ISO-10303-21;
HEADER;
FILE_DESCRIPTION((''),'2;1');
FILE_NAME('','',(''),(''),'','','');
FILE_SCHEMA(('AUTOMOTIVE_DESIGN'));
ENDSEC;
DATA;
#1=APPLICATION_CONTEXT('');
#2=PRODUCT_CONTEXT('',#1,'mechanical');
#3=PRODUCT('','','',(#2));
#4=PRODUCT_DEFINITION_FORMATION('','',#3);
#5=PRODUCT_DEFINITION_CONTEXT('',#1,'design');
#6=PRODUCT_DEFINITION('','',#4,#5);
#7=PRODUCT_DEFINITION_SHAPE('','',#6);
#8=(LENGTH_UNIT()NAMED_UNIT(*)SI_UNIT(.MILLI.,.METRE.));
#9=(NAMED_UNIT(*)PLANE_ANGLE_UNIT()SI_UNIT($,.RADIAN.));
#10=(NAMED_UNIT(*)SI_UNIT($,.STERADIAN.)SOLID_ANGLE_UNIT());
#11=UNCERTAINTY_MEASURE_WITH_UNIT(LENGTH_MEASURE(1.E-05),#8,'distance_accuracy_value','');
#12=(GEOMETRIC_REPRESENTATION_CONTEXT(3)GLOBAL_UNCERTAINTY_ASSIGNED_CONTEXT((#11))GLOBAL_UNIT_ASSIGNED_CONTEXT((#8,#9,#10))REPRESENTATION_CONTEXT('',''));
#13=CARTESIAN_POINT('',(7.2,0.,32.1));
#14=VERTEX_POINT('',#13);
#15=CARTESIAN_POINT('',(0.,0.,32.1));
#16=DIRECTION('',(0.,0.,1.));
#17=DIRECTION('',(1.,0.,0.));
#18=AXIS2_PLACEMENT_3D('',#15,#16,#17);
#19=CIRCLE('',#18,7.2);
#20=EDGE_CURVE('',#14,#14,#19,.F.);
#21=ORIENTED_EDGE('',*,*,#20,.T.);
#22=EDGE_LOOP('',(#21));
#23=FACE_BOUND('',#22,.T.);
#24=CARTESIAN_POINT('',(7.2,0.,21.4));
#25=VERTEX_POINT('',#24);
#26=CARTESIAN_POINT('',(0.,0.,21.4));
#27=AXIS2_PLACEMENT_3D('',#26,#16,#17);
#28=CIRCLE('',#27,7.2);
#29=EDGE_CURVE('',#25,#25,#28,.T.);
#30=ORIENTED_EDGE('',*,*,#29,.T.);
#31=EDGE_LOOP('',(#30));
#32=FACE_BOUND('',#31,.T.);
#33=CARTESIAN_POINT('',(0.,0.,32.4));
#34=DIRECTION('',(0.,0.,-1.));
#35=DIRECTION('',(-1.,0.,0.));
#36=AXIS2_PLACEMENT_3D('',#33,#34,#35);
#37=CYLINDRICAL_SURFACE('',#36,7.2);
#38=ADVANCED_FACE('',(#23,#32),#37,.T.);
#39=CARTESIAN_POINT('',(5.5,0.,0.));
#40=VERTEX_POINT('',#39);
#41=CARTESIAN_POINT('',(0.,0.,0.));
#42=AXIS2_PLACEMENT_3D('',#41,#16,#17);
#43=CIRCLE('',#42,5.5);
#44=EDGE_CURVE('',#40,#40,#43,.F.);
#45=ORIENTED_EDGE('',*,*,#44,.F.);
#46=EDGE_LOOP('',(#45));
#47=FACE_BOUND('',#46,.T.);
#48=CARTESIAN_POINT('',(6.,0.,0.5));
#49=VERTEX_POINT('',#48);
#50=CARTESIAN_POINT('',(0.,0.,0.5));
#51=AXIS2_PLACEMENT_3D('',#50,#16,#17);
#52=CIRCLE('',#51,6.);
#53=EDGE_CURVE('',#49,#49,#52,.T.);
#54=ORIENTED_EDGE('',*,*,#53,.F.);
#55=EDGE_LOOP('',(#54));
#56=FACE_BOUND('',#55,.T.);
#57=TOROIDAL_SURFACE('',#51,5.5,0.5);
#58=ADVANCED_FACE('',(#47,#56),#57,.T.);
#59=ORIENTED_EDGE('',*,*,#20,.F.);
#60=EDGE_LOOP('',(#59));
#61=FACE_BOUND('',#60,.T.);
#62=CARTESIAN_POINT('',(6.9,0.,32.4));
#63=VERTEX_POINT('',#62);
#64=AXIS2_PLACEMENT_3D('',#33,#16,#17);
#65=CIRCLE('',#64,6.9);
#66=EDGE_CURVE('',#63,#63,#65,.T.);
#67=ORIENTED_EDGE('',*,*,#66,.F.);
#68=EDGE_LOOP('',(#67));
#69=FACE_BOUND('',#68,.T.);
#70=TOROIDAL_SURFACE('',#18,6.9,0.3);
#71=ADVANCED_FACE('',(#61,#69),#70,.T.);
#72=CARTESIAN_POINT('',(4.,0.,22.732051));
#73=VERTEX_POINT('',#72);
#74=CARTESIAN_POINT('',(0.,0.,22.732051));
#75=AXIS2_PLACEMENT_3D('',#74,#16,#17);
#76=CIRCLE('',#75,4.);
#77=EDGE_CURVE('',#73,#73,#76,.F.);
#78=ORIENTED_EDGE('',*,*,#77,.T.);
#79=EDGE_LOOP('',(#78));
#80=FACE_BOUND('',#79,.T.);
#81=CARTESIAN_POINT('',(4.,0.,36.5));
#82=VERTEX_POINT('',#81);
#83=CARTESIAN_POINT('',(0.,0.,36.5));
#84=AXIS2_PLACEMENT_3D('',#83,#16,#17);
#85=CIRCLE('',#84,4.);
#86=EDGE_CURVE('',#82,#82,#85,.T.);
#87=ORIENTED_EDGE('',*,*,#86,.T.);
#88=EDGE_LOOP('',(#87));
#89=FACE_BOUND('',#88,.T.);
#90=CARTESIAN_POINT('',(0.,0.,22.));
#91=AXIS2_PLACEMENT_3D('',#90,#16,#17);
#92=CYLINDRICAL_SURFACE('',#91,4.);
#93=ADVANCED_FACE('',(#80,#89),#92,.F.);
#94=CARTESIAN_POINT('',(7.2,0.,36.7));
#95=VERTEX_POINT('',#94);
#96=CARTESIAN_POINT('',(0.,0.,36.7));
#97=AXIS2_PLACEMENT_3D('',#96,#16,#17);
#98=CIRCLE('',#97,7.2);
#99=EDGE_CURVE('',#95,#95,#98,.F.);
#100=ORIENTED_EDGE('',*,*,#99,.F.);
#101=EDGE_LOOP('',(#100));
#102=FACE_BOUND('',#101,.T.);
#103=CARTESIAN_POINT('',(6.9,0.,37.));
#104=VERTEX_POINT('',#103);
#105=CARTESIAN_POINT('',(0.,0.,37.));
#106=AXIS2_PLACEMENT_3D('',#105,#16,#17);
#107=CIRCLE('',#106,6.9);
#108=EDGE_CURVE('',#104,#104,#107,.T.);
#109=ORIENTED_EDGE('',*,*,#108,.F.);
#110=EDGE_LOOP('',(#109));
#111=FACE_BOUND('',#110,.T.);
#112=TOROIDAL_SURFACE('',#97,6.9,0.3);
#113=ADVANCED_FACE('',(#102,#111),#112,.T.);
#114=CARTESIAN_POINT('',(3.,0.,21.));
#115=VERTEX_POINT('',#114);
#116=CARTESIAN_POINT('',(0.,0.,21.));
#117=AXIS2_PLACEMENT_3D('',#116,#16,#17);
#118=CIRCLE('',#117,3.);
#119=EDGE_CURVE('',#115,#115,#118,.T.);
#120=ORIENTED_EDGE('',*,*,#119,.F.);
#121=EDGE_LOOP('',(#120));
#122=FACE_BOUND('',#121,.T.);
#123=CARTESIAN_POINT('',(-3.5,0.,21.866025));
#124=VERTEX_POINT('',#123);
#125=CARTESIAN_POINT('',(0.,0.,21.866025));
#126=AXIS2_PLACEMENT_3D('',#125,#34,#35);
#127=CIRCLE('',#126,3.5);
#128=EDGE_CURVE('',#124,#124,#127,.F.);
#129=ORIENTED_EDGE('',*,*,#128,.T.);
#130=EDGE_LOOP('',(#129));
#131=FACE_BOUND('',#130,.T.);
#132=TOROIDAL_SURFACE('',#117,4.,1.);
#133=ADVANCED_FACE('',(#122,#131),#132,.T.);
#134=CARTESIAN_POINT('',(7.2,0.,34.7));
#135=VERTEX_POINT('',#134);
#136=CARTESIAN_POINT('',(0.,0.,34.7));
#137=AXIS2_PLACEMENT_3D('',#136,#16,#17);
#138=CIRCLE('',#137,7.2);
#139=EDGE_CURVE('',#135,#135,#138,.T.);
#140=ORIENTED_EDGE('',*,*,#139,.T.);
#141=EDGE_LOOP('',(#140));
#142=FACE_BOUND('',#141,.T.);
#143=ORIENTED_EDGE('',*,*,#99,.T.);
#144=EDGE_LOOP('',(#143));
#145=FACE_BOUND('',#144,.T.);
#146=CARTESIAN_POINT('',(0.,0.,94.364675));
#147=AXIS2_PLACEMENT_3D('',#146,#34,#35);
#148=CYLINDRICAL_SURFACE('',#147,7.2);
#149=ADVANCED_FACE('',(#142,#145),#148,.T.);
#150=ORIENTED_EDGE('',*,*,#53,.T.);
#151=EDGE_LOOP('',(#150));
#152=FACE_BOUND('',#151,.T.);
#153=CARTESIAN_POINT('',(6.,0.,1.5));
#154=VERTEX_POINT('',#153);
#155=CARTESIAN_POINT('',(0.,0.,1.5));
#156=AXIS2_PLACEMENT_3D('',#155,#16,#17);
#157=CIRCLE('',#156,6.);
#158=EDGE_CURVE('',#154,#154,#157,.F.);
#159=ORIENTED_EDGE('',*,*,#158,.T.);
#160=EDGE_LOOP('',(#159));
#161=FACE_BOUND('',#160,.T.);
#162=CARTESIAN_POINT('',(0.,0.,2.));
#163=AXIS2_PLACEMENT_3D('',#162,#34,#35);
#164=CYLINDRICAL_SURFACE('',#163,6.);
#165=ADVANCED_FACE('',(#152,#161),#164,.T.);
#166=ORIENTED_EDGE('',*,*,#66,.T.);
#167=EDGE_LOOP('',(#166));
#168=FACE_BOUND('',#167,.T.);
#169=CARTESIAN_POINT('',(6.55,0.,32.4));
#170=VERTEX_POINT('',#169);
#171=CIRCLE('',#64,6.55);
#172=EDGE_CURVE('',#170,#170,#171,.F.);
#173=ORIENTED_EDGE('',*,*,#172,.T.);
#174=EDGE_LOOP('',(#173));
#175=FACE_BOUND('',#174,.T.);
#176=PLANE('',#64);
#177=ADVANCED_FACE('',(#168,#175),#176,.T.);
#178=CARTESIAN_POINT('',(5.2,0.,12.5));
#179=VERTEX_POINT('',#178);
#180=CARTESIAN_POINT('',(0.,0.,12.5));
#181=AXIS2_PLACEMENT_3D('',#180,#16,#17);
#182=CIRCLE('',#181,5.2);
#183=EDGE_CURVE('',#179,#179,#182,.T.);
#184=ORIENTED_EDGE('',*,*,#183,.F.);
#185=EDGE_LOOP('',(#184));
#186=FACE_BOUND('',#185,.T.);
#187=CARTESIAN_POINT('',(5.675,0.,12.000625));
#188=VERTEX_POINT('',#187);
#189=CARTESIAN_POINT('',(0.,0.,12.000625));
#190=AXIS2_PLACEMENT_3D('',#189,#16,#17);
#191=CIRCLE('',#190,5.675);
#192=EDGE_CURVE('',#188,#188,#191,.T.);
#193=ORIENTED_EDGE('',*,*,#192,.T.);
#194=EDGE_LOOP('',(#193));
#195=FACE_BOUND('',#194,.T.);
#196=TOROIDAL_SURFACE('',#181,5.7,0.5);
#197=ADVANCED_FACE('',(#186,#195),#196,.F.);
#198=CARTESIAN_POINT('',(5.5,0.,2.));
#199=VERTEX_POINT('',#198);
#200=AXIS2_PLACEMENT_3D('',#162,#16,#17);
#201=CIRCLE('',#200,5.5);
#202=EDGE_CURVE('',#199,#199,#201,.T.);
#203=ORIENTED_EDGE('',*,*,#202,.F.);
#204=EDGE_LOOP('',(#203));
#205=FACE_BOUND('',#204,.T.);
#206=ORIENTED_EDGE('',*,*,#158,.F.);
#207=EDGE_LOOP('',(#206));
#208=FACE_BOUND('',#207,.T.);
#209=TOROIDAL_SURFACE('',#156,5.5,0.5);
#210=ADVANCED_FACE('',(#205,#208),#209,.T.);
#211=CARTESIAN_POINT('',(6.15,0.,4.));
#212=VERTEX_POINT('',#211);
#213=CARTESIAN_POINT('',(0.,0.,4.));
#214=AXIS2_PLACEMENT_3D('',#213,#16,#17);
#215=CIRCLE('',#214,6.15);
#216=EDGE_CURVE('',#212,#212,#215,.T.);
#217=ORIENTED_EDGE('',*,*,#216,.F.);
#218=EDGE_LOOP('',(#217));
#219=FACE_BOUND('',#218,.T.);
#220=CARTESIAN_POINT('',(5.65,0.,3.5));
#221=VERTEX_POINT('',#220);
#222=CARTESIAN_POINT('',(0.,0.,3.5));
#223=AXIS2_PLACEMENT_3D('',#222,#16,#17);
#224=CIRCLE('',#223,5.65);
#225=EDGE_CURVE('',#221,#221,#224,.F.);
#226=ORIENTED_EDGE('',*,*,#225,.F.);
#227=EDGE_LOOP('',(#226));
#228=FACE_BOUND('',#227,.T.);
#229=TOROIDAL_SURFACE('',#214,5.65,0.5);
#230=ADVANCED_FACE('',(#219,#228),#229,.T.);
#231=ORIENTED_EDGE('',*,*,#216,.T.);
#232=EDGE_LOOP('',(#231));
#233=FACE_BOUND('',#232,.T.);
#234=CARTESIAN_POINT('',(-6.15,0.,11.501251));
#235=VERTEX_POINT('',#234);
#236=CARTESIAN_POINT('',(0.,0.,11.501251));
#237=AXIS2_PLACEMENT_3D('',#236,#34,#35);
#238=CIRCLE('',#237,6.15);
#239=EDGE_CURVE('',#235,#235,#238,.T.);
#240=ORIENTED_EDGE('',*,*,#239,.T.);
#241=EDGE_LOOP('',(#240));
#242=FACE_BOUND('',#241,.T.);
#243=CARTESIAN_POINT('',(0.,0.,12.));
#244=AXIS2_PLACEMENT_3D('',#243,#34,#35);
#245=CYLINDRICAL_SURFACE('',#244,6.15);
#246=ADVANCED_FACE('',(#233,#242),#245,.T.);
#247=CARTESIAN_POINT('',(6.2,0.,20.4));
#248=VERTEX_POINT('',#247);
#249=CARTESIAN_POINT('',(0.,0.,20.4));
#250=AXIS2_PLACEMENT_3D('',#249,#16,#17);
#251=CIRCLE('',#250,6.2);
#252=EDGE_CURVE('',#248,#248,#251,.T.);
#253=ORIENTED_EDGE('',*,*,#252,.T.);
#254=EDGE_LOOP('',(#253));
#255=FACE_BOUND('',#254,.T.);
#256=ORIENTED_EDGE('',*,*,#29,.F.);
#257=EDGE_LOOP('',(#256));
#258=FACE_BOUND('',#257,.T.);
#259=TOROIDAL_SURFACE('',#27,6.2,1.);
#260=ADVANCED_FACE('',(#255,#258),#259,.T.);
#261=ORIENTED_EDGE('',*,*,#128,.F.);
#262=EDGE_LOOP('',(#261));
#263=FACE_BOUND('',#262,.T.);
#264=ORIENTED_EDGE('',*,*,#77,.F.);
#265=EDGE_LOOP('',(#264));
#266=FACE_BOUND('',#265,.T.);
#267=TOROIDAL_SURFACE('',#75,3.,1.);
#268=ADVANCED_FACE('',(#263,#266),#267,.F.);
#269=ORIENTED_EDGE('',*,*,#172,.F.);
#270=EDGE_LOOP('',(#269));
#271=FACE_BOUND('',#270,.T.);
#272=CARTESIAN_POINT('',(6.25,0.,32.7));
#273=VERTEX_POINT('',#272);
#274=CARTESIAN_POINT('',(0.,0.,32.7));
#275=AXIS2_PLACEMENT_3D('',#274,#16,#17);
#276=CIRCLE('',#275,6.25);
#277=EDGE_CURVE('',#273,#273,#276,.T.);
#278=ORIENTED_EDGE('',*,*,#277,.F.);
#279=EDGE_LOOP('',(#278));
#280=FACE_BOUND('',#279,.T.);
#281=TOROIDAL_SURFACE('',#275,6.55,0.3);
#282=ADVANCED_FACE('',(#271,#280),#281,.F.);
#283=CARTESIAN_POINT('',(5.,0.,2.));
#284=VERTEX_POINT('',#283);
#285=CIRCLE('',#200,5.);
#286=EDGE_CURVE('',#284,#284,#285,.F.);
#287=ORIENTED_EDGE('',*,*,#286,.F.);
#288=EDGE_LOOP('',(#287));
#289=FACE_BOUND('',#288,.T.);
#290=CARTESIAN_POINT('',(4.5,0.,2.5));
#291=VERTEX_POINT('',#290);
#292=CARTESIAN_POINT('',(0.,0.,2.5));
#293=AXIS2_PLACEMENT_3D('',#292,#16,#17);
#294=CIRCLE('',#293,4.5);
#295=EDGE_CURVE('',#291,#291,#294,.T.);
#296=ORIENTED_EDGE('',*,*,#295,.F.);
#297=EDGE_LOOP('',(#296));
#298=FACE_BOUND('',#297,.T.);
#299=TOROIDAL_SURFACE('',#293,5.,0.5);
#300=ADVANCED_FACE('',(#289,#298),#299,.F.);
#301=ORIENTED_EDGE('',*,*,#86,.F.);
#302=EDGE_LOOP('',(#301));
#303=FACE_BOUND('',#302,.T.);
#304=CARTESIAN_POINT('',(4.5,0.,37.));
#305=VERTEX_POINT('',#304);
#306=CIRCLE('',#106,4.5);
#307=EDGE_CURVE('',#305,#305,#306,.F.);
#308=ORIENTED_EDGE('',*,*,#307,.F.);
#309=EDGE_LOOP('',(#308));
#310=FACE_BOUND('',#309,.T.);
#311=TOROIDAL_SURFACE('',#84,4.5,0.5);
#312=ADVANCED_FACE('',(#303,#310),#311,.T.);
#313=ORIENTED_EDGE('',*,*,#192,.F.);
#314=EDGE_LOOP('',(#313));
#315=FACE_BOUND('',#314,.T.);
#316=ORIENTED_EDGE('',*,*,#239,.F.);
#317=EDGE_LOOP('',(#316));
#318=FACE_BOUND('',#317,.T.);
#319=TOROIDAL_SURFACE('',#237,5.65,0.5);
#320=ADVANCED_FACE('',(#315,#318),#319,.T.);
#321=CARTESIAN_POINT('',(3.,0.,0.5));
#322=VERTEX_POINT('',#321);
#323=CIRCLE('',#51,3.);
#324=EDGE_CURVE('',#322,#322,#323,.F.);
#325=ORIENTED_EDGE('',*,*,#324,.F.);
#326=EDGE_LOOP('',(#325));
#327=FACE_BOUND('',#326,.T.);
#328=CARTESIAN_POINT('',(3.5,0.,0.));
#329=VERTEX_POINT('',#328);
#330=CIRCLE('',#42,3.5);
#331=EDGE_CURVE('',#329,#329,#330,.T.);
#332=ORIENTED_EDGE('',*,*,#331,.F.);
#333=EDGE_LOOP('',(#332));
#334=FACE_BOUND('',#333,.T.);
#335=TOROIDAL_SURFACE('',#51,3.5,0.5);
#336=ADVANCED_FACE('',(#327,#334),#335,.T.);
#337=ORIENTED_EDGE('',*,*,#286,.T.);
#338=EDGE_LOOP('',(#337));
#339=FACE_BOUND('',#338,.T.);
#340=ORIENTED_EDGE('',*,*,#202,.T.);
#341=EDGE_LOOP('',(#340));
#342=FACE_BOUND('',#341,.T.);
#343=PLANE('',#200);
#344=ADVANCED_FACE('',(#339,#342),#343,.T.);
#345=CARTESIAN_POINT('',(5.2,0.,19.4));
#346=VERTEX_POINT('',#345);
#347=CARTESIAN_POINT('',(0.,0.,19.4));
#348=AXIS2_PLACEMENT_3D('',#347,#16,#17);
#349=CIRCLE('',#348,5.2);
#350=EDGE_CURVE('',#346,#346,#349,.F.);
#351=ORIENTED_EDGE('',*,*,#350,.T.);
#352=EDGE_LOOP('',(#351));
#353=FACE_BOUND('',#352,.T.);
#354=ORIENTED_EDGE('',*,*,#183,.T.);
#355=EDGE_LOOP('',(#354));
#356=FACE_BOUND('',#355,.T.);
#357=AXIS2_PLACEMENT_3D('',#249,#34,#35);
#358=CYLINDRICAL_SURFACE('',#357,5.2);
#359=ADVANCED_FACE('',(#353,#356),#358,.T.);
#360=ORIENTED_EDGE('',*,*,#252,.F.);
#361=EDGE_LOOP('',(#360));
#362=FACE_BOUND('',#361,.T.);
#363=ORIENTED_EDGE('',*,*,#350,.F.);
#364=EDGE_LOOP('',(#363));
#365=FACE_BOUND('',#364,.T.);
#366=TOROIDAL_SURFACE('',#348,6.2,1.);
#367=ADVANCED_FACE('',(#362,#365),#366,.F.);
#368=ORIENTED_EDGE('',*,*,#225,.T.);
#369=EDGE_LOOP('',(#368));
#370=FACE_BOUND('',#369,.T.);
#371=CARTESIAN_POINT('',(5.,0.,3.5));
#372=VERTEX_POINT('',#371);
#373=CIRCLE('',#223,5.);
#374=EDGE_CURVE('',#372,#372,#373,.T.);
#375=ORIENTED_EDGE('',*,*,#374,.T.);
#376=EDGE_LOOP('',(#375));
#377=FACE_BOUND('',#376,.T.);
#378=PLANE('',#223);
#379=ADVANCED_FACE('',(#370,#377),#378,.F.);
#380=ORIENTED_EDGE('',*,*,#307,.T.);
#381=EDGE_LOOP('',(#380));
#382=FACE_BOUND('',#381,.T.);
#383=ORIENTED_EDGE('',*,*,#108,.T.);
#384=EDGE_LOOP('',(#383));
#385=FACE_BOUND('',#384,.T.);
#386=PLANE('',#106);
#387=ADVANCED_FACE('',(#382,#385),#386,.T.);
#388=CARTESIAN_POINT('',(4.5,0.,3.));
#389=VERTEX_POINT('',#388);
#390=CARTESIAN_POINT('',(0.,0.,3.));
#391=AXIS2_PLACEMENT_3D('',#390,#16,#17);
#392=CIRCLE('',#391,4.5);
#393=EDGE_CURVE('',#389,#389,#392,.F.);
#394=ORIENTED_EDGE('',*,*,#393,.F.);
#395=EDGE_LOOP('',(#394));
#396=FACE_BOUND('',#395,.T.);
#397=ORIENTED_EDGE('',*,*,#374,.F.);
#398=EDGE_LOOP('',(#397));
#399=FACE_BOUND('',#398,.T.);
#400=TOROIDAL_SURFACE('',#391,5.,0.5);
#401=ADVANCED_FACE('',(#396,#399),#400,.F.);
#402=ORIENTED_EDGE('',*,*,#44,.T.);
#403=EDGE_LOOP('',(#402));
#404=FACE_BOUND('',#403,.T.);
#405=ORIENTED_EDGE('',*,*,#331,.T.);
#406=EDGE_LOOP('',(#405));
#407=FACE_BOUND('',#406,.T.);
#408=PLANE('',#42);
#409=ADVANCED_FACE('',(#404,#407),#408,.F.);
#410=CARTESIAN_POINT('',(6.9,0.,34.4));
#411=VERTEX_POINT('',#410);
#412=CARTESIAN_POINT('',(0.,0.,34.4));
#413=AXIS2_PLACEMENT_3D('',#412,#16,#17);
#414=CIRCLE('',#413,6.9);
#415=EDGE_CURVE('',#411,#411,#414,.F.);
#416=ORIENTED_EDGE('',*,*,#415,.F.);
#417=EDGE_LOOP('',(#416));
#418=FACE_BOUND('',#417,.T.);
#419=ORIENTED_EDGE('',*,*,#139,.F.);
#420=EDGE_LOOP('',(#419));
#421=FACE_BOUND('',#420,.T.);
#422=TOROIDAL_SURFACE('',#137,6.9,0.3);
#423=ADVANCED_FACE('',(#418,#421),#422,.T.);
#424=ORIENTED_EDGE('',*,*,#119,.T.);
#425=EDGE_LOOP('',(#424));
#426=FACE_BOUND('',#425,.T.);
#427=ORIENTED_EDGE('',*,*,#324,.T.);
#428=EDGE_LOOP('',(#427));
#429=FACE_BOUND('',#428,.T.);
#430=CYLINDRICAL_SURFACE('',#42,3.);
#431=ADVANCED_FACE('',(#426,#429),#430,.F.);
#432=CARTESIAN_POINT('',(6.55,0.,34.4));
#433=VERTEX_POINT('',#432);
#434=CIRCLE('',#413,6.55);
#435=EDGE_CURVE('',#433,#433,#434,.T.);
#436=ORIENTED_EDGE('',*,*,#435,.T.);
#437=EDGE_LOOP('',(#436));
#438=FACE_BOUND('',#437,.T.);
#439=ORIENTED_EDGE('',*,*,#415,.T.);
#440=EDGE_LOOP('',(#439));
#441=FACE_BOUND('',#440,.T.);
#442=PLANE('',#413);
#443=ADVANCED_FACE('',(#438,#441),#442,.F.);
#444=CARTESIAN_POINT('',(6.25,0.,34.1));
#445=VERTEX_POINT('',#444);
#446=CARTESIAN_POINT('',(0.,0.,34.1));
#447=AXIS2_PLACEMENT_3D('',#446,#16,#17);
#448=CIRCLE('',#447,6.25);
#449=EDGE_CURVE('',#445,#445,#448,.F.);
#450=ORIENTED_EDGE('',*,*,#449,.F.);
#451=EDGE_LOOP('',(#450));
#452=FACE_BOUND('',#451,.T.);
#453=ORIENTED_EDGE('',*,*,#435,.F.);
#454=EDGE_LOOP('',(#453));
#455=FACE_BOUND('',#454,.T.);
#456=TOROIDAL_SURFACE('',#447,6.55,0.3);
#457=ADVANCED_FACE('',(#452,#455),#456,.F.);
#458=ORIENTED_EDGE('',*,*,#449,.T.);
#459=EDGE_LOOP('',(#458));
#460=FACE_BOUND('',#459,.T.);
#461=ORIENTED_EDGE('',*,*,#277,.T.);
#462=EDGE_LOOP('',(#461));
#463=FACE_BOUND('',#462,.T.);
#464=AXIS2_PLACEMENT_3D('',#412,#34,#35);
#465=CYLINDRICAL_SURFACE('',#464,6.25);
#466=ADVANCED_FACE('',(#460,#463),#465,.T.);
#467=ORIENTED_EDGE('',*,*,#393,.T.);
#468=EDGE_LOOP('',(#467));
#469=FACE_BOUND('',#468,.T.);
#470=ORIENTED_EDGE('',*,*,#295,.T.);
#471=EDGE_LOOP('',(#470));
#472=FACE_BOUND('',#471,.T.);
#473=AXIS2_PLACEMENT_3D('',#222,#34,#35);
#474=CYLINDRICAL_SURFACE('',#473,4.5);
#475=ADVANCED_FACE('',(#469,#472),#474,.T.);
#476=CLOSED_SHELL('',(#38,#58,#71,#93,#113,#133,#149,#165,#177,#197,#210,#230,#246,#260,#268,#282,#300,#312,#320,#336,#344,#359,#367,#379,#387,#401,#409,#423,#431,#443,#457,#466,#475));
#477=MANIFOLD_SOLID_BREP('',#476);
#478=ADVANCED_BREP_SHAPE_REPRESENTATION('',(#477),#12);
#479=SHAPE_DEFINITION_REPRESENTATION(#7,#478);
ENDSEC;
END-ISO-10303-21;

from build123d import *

# Parameters (mm, degrees)
SKETCH1_R           = 6
BOSS_EXTRUDE1_DEPTH = 2
SKETCH2_R           = 4.5
BOSS_EXTRUDE2_DEPTH = 1.5
SKETCH3_R           = 6.15
BOSS_EXTRUDE3_DEPTH = 8.5
SKETCH4_R           = 5.2
BOSS_EXTRUDE6_DEPTH = 8.4
FILLET4_R           = 0.5
FILLET5_R           = 0.5
SKETCH7_R           = 7.2
BOSS_EXTRUDE7_DEPTH = 12
FILLET6_R           = 1
FILLET7_R           = 1
SKETCH8_R           = 6.25
BOSS_EXTRUDE8_DEPTH = 2
SKETCH9_R           = 7.2
BOSS_EXTRUDE9_DEPTH = 2.6
FILLET8_R           = 0.3
FILLET9_R           = 0.3
FILLET10_R          = 0.5
SKETCH10_R          = 4
CUT_EXTRUDE1_DEPTH  = 15
SKETCH11_R          = 3
CUT_EXTRUDE2_DEPTH  = 25.242112179
FILLET11_R          = 1
FILLET12_R          = 1
FILLET13_R          = 0.5
FILLET14_R          = 0.5


with BuildPart() as part:
    # Sketch1 → Boss-Extrude1 (new body)
    with BuildSketch(Plane.XY):
        Circle(SKETCH1_R)
    extrude(amount=BOSS_EXTRUDE1_DEPTH)

    # Sketch2 → Boss-Extrude2 (add)
    with BuildSketch(Plane.XY.offset(2)):
        Circle(SKETCH2_R)
    extrude(amount=BOSS_EXTRUDE2_DEPTH)

    # Sketch3 → Boss-Extrude3 (add)
    with BuildSketch(Plane.XY.offset(3.5)):
        Circle(SKETCH3_R)
    extrude(amount=BOSS_EXTRUDE3_DEPTH)

    # Sketch4 → Boss-Extrude6 (add)
    with BuildSketch(Plane.XY.offset(12)):
        Circle(SKETCH4_R)
    extrude(amount=BOSS_EXTRUDE6_DEPTH)

    # Fillet4
    fillet4_edges = [part.edges().sort_by_distance(p)[0] for p in [
        (-5.2, 0, 12),
    ]]
    fillet(fillet4_edges, radius=FILLET4_R)

    # Fillet5
    fillet5_edges = [part.edges().sort_by_distance(p)[0] for p in [
        (-6.15, 0, 12),
    ]]
    fillet(fillet5_edges, radius=FILLET5_R)

    # Sketch7 → Boss-Extrude7 (add)
    with BuildSketch(Plane.XY.offset(20.4)):
        Circle(SKETCH7_R)
    extrude(amount=BOSS_EXTRUDE7_DEPTH)

    # Fillet6
    fillet6_edges = [part.edges().sort_by_distance(p)[0] for p in [
        (-5.2, 0, 20.4),
    ]]
    fillet(fillet6_edges, radius=FILLET6_R)

    # Fillet7
    fillet7_edges = [part.edges().sort_by_distance(p)[0] for p in [
        (-7.2, 0, 20.4),
    ]]
    fillet(fillet7_edges, radius=FILLET7_R - 0.0001)  # a hair under: the kernel refuses the full size

    # Sketch8 → Boss-Extrude8 (add)
    with BuildSketch(Plane.XY.offset(32.4)):
        Circle(SKETCH8_R)
    extrude(amount=BOSS_EXTRUDE8_DEPTH)

    # Sketch9 → Boss-Extrude9 (add)
    with BuildSketch(Plane.XY.offset(34.4)):
        Circle(SKETCH9_R)
    extrude(amount=BOSS_EXTRUDE9_DEPTH)

    # Fillet8
    fillet8_edges = [part.edges().sort_by_distance(p)[0] for p in [
        (-6.25, 0, 32.4),
        (-6.25, 0, 34.4),
    ]]
    fillet(fillet8_edges, radius=FILLET8_R)

    # Fillet9
    fillet9_edges = [part.edges().sort_by_distance(p)[0] for p in [
        (-7.2, 0, 32.4),
        (-7.2, 0, 34.4),
        (-7.2, 0, 37),
    ]]
    fillet(fillet9_edges, radius=FILLET9_R)

    # Fillet10
    fillet10_edges = [part.edges().sort_by_distance(p)[0] for p in [
        (-6.15, 0, 3.5),
        (-6, 0, 0),
        (-6, 0, 2),
        (-4.5, 0, 2),
        (-4.5, 0, 3.5),
    ]]
    fillet(fillet10_edges, radius=FILLET10_R)

    # Sketch10 → Cut-Extrude1 (cut)
    with BuildSketch(Plane.XY.offset(37)):
        Circle(SKETCH10_R)
    extrude(amount=-CUT_EXTRUDE1_DEPTH, mode=Mode.SUBTRACT)

    # Sketch11 → Cut-Extrude2 (cut, through all)
    with BuildSketch(Plane.XY.offset(22)):
        Circle(SKETCH11_R)
    extrude(amount=-CUT_EXTRUDE2_DEPTH, mode=Mode.SUBTRACT)

    # Fillet11
    fillet11_edges = [part.edges().sort_by_distance(p)[0] for p in [
        (-3, 0, 22),
    ]]
    fillet(fillet11_edges, radius=FILLET11_R - 0.0001)  # a hair under: the kernel refuses the full size

    # Fillet12
    fillet12_edges = [part.edges().sort_by_distance(p)[0] for p in [
        (-4, 0, 22),
    ]]
    fillet(fillet12_edges, radius=FILLET12_R)

    # Fillet13
    fillet13_edges = [part.edges().sort_by_distance(p)[0] for p in [
        (-4, 0, 37),
    ]]
    fillet(fillet13_edges, radius=FILLET13_R)

    # Fillet14
    fillet14_edges = [part.edges().sort_by_distance(p)[0] for p in [
        (-3, 0, 0),
    ]]
    fillet(fillet14_edges, radius=FILLET14_R)


solid = part.part
